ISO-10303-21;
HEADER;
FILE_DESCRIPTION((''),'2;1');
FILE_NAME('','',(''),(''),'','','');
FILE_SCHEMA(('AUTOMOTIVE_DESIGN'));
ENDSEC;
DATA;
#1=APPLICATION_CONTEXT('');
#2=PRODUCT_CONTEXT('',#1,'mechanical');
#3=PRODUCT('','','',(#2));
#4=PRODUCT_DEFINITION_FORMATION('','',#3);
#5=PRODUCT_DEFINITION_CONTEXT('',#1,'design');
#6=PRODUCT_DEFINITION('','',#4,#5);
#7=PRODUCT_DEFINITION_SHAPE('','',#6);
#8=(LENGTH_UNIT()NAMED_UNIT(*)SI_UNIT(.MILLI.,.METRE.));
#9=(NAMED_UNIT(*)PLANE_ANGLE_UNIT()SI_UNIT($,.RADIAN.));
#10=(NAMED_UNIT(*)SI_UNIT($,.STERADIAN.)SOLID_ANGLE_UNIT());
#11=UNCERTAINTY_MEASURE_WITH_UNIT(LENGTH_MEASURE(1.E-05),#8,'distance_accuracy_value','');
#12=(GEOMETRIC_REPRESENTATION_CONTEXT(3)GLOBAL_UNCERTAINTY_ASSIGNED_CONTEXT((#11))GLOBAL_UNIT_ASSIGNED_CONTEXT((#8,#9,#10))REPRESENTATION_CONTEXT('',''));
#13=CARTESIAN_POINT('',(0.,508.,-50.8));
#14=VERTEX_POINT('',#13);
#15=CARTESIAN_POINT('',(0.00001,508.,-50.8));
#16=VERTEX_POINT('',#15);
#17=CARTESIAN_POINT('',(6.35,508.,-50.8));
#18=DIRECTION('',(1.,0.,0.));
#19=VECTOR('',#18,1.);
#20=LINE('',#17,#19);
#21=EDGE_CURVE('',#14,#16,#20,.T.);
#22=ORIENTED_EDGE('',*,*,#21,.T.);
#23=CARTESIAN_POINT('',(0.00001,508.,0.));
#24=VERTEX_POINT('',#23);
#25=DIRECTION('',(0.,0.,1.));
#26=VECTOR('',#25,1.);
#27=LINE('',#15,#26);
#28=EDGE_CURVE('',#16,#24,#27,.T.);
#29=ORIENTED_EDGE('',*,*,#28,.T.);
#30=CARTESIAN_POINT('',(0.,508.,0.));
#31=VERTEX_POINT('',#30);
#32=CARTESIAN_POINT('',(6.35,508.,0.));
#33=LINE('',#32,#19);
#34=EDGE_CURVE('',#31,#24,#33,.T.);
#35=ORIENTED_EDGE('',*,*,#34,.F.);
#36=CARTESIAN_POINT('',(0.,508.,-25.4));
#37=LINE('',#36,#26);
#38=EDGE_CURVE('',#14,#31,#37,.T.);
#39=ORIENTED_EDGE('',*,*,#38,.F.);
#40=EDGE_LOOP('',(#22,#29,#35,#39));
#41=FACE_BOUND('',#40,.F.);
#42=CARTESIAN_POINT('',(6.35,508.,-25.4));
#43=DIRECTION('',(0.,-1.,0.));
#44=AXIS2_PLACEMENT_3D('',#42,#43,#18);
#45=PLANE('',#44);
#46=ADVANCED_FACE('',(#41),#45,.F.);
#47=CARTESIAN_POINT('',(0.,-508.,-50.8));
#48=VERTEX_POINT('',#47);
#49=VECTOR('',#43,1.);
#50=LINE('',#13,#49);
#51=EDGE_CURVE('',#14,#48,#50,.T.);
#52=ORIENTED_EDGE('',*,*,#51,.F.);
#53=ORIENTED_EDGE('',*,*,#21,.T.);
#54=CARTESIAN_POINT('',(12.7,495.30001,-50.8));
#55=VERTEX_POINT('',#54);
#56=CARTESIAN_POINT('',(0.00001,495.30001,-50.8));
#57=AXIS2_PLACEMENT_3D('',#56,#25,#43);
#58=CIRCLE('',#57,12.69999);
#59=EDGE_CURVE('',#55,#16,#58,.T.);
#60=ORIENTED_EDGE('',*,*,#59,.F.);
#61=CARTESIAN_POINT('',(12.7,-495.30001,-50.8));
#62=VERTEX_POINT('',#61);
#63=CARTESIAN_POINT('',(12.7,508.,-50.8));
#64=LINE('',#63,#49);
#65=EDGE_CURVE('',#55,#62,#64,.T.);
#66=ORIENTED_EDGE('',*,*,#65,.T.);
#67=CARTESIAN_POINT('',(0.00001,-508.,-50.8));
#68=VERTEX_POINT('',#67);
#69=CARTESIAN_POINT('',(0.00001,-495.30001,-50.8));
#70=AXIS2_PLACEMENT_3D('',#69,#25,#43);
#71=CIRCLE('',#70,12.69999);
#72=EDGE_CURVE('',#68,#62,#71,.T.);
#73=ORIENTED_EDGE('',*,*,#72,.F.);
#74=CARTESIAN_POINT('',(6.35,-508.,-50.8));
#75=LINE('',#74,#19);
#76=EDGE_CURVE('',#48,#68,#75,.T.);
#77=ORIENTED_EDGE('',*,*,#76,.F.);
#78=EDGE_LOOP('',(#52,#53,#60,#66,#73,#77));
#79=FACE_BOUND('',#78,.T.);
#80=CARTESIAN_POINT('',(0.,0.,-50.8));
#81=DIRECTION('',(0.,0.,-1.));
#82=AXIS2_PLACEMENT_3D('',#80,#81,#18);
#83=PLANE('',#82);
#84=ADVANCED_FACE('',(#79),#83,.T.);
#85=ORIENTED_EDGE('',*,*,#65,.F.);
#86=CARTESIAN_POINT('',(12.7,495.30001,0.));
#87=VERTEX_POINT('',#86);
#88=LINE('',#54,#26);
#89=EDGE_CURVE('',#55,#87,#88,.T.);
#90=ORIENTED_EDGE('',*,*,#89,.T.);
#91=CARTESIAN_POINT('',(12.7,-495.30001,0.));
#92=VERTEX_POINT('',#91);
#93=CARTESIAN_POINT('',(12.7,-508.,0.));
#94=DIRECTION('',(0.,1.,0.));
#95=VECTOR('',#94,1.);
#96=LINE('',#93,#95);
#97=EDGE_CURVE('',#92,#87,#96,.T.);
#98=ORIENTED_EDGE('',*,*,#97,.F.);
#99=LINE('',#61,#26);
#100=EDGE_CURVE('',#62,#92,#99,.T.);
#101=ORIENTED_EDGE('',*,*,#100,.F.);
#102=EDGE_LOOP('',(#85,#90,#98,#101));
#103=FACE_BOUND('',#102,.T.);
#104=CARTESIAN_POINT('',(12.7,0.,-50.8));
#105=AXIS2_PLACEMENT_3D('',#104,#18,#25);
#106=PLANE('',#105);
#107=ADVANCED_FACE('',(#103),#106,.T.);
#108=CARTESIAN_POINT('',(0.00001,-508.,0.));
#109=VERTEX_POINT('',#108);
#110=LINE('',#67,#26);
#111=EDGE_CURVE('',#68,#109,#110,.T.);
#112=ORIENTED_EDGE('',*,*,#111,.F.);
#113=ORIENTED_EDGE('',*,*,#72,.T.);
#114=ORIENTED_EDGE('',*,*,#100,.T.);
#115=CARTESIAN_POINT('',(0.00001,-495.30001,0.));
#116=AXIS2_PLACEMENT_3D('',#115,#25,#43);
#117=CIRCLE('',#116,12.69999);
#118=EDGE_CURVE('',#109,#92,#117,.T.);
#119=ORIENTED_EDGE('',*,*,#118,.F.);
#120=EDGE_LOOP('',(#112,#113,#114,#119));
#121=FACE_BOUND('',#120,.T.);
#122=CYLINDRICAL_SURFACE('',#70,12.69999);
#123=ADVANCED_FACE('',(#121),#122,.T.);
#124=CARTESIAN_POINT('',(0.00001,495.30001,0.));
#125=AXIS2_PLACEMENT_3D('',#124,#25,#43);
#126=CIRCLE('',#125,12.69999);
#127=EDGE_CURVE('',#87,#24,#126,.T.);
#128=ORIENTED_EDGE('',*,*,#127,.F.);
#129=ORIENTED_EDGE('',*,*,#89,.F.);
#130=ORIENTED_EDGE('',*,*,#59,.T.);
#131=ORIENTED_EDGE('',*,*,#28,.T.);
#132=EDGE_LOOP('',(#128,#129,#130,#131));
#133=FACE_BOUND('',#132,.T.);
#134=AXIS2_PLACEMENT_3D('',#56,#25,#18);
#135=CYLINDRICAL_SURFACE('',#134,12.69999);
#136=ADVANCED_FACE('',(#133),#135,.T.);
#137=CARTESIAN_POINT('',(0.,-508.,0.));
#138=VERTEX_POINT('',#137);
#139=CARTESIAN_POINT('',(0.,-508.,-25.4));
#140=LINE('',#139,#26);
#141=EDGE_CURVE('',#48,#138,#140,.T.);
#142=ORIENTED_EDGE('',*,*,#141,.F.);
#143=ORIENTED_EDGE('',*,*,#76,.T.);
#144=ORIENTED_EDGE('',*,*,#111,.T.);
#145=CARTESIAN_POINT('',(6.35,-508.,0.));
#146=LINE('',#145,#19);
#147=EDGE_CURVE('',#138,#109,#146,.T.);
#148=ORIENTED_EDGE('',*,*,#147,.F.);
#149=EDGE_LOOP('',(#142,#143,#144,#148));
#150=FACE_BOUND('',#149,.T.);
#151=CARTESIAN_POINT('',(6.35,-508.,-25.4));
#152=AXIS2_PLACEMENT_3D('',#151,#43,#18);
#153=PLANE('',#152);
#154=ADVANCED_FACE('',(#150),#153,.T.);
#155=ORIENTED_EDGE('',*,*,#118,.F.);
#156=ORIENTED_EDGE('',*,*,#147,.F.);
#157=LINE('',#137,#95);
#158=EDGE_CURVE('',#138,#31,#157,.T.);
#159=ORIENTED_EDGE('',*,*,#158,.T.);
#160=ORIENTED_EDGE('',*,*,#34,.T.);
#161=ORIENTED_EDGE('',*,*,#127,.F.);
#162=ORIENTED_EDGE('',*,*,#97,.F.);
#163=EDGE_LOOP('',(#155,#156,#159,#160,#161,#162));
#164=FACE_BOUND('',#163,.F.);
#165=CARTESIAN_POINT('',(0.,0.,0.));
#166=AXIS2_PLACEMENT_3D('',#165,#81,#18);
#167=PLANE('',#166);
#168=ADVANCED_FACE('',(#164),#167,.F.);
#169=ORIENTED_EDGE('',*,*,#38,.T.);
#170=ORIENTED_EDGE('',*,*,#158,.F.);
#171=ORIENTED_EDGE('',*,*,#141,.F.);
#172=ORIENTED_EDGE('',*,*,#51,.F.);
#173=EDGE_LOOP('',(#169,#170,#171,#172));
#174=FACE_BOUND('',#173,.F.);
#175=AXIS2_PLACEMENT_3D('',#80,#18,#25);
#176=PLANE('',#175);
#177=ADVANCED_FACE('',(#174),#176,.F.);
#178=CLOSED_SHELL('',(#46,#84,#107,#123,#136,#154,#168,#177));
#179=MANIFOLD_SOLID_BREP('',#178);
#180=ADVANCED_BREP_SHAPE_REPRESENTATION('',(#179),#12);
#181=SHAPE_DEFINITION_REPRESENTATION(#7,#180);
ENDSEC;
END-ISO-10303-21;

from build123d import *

# Parameters (mm, degrees)
F0_W     = 12.7
F0_H     = 50.8
F1_DEPTH = 508
F2_R     = 12.69999


# Not quite as in the source:
# - a fillet or chamfer is up to 0.001 mm smaller than in the source, because OpenCascade refuses the exact size


with BuildPart() as f1:
    # F0 (on Front) → F1 (new body, symmetric)
    with BuildSketch(Plane.XZ):
        with Locations((6.35, -25.4)):
            Rectangle(F0_W, F0_H)
    extrude(amount=F1_DEPTH, both=True)

    # F2 (radius 12.7 in the source; OpenCascade refuses exactly that, so slightly less here)
    f2_edges = [f1.edges().sort_by_distance(p)[0] for p in [
        (12.7, -508, -25.4),
        (12.7, 508, -25.4),
    ]]
    fillet(f2_edges, radius=F2_R)


solid = f1.part
